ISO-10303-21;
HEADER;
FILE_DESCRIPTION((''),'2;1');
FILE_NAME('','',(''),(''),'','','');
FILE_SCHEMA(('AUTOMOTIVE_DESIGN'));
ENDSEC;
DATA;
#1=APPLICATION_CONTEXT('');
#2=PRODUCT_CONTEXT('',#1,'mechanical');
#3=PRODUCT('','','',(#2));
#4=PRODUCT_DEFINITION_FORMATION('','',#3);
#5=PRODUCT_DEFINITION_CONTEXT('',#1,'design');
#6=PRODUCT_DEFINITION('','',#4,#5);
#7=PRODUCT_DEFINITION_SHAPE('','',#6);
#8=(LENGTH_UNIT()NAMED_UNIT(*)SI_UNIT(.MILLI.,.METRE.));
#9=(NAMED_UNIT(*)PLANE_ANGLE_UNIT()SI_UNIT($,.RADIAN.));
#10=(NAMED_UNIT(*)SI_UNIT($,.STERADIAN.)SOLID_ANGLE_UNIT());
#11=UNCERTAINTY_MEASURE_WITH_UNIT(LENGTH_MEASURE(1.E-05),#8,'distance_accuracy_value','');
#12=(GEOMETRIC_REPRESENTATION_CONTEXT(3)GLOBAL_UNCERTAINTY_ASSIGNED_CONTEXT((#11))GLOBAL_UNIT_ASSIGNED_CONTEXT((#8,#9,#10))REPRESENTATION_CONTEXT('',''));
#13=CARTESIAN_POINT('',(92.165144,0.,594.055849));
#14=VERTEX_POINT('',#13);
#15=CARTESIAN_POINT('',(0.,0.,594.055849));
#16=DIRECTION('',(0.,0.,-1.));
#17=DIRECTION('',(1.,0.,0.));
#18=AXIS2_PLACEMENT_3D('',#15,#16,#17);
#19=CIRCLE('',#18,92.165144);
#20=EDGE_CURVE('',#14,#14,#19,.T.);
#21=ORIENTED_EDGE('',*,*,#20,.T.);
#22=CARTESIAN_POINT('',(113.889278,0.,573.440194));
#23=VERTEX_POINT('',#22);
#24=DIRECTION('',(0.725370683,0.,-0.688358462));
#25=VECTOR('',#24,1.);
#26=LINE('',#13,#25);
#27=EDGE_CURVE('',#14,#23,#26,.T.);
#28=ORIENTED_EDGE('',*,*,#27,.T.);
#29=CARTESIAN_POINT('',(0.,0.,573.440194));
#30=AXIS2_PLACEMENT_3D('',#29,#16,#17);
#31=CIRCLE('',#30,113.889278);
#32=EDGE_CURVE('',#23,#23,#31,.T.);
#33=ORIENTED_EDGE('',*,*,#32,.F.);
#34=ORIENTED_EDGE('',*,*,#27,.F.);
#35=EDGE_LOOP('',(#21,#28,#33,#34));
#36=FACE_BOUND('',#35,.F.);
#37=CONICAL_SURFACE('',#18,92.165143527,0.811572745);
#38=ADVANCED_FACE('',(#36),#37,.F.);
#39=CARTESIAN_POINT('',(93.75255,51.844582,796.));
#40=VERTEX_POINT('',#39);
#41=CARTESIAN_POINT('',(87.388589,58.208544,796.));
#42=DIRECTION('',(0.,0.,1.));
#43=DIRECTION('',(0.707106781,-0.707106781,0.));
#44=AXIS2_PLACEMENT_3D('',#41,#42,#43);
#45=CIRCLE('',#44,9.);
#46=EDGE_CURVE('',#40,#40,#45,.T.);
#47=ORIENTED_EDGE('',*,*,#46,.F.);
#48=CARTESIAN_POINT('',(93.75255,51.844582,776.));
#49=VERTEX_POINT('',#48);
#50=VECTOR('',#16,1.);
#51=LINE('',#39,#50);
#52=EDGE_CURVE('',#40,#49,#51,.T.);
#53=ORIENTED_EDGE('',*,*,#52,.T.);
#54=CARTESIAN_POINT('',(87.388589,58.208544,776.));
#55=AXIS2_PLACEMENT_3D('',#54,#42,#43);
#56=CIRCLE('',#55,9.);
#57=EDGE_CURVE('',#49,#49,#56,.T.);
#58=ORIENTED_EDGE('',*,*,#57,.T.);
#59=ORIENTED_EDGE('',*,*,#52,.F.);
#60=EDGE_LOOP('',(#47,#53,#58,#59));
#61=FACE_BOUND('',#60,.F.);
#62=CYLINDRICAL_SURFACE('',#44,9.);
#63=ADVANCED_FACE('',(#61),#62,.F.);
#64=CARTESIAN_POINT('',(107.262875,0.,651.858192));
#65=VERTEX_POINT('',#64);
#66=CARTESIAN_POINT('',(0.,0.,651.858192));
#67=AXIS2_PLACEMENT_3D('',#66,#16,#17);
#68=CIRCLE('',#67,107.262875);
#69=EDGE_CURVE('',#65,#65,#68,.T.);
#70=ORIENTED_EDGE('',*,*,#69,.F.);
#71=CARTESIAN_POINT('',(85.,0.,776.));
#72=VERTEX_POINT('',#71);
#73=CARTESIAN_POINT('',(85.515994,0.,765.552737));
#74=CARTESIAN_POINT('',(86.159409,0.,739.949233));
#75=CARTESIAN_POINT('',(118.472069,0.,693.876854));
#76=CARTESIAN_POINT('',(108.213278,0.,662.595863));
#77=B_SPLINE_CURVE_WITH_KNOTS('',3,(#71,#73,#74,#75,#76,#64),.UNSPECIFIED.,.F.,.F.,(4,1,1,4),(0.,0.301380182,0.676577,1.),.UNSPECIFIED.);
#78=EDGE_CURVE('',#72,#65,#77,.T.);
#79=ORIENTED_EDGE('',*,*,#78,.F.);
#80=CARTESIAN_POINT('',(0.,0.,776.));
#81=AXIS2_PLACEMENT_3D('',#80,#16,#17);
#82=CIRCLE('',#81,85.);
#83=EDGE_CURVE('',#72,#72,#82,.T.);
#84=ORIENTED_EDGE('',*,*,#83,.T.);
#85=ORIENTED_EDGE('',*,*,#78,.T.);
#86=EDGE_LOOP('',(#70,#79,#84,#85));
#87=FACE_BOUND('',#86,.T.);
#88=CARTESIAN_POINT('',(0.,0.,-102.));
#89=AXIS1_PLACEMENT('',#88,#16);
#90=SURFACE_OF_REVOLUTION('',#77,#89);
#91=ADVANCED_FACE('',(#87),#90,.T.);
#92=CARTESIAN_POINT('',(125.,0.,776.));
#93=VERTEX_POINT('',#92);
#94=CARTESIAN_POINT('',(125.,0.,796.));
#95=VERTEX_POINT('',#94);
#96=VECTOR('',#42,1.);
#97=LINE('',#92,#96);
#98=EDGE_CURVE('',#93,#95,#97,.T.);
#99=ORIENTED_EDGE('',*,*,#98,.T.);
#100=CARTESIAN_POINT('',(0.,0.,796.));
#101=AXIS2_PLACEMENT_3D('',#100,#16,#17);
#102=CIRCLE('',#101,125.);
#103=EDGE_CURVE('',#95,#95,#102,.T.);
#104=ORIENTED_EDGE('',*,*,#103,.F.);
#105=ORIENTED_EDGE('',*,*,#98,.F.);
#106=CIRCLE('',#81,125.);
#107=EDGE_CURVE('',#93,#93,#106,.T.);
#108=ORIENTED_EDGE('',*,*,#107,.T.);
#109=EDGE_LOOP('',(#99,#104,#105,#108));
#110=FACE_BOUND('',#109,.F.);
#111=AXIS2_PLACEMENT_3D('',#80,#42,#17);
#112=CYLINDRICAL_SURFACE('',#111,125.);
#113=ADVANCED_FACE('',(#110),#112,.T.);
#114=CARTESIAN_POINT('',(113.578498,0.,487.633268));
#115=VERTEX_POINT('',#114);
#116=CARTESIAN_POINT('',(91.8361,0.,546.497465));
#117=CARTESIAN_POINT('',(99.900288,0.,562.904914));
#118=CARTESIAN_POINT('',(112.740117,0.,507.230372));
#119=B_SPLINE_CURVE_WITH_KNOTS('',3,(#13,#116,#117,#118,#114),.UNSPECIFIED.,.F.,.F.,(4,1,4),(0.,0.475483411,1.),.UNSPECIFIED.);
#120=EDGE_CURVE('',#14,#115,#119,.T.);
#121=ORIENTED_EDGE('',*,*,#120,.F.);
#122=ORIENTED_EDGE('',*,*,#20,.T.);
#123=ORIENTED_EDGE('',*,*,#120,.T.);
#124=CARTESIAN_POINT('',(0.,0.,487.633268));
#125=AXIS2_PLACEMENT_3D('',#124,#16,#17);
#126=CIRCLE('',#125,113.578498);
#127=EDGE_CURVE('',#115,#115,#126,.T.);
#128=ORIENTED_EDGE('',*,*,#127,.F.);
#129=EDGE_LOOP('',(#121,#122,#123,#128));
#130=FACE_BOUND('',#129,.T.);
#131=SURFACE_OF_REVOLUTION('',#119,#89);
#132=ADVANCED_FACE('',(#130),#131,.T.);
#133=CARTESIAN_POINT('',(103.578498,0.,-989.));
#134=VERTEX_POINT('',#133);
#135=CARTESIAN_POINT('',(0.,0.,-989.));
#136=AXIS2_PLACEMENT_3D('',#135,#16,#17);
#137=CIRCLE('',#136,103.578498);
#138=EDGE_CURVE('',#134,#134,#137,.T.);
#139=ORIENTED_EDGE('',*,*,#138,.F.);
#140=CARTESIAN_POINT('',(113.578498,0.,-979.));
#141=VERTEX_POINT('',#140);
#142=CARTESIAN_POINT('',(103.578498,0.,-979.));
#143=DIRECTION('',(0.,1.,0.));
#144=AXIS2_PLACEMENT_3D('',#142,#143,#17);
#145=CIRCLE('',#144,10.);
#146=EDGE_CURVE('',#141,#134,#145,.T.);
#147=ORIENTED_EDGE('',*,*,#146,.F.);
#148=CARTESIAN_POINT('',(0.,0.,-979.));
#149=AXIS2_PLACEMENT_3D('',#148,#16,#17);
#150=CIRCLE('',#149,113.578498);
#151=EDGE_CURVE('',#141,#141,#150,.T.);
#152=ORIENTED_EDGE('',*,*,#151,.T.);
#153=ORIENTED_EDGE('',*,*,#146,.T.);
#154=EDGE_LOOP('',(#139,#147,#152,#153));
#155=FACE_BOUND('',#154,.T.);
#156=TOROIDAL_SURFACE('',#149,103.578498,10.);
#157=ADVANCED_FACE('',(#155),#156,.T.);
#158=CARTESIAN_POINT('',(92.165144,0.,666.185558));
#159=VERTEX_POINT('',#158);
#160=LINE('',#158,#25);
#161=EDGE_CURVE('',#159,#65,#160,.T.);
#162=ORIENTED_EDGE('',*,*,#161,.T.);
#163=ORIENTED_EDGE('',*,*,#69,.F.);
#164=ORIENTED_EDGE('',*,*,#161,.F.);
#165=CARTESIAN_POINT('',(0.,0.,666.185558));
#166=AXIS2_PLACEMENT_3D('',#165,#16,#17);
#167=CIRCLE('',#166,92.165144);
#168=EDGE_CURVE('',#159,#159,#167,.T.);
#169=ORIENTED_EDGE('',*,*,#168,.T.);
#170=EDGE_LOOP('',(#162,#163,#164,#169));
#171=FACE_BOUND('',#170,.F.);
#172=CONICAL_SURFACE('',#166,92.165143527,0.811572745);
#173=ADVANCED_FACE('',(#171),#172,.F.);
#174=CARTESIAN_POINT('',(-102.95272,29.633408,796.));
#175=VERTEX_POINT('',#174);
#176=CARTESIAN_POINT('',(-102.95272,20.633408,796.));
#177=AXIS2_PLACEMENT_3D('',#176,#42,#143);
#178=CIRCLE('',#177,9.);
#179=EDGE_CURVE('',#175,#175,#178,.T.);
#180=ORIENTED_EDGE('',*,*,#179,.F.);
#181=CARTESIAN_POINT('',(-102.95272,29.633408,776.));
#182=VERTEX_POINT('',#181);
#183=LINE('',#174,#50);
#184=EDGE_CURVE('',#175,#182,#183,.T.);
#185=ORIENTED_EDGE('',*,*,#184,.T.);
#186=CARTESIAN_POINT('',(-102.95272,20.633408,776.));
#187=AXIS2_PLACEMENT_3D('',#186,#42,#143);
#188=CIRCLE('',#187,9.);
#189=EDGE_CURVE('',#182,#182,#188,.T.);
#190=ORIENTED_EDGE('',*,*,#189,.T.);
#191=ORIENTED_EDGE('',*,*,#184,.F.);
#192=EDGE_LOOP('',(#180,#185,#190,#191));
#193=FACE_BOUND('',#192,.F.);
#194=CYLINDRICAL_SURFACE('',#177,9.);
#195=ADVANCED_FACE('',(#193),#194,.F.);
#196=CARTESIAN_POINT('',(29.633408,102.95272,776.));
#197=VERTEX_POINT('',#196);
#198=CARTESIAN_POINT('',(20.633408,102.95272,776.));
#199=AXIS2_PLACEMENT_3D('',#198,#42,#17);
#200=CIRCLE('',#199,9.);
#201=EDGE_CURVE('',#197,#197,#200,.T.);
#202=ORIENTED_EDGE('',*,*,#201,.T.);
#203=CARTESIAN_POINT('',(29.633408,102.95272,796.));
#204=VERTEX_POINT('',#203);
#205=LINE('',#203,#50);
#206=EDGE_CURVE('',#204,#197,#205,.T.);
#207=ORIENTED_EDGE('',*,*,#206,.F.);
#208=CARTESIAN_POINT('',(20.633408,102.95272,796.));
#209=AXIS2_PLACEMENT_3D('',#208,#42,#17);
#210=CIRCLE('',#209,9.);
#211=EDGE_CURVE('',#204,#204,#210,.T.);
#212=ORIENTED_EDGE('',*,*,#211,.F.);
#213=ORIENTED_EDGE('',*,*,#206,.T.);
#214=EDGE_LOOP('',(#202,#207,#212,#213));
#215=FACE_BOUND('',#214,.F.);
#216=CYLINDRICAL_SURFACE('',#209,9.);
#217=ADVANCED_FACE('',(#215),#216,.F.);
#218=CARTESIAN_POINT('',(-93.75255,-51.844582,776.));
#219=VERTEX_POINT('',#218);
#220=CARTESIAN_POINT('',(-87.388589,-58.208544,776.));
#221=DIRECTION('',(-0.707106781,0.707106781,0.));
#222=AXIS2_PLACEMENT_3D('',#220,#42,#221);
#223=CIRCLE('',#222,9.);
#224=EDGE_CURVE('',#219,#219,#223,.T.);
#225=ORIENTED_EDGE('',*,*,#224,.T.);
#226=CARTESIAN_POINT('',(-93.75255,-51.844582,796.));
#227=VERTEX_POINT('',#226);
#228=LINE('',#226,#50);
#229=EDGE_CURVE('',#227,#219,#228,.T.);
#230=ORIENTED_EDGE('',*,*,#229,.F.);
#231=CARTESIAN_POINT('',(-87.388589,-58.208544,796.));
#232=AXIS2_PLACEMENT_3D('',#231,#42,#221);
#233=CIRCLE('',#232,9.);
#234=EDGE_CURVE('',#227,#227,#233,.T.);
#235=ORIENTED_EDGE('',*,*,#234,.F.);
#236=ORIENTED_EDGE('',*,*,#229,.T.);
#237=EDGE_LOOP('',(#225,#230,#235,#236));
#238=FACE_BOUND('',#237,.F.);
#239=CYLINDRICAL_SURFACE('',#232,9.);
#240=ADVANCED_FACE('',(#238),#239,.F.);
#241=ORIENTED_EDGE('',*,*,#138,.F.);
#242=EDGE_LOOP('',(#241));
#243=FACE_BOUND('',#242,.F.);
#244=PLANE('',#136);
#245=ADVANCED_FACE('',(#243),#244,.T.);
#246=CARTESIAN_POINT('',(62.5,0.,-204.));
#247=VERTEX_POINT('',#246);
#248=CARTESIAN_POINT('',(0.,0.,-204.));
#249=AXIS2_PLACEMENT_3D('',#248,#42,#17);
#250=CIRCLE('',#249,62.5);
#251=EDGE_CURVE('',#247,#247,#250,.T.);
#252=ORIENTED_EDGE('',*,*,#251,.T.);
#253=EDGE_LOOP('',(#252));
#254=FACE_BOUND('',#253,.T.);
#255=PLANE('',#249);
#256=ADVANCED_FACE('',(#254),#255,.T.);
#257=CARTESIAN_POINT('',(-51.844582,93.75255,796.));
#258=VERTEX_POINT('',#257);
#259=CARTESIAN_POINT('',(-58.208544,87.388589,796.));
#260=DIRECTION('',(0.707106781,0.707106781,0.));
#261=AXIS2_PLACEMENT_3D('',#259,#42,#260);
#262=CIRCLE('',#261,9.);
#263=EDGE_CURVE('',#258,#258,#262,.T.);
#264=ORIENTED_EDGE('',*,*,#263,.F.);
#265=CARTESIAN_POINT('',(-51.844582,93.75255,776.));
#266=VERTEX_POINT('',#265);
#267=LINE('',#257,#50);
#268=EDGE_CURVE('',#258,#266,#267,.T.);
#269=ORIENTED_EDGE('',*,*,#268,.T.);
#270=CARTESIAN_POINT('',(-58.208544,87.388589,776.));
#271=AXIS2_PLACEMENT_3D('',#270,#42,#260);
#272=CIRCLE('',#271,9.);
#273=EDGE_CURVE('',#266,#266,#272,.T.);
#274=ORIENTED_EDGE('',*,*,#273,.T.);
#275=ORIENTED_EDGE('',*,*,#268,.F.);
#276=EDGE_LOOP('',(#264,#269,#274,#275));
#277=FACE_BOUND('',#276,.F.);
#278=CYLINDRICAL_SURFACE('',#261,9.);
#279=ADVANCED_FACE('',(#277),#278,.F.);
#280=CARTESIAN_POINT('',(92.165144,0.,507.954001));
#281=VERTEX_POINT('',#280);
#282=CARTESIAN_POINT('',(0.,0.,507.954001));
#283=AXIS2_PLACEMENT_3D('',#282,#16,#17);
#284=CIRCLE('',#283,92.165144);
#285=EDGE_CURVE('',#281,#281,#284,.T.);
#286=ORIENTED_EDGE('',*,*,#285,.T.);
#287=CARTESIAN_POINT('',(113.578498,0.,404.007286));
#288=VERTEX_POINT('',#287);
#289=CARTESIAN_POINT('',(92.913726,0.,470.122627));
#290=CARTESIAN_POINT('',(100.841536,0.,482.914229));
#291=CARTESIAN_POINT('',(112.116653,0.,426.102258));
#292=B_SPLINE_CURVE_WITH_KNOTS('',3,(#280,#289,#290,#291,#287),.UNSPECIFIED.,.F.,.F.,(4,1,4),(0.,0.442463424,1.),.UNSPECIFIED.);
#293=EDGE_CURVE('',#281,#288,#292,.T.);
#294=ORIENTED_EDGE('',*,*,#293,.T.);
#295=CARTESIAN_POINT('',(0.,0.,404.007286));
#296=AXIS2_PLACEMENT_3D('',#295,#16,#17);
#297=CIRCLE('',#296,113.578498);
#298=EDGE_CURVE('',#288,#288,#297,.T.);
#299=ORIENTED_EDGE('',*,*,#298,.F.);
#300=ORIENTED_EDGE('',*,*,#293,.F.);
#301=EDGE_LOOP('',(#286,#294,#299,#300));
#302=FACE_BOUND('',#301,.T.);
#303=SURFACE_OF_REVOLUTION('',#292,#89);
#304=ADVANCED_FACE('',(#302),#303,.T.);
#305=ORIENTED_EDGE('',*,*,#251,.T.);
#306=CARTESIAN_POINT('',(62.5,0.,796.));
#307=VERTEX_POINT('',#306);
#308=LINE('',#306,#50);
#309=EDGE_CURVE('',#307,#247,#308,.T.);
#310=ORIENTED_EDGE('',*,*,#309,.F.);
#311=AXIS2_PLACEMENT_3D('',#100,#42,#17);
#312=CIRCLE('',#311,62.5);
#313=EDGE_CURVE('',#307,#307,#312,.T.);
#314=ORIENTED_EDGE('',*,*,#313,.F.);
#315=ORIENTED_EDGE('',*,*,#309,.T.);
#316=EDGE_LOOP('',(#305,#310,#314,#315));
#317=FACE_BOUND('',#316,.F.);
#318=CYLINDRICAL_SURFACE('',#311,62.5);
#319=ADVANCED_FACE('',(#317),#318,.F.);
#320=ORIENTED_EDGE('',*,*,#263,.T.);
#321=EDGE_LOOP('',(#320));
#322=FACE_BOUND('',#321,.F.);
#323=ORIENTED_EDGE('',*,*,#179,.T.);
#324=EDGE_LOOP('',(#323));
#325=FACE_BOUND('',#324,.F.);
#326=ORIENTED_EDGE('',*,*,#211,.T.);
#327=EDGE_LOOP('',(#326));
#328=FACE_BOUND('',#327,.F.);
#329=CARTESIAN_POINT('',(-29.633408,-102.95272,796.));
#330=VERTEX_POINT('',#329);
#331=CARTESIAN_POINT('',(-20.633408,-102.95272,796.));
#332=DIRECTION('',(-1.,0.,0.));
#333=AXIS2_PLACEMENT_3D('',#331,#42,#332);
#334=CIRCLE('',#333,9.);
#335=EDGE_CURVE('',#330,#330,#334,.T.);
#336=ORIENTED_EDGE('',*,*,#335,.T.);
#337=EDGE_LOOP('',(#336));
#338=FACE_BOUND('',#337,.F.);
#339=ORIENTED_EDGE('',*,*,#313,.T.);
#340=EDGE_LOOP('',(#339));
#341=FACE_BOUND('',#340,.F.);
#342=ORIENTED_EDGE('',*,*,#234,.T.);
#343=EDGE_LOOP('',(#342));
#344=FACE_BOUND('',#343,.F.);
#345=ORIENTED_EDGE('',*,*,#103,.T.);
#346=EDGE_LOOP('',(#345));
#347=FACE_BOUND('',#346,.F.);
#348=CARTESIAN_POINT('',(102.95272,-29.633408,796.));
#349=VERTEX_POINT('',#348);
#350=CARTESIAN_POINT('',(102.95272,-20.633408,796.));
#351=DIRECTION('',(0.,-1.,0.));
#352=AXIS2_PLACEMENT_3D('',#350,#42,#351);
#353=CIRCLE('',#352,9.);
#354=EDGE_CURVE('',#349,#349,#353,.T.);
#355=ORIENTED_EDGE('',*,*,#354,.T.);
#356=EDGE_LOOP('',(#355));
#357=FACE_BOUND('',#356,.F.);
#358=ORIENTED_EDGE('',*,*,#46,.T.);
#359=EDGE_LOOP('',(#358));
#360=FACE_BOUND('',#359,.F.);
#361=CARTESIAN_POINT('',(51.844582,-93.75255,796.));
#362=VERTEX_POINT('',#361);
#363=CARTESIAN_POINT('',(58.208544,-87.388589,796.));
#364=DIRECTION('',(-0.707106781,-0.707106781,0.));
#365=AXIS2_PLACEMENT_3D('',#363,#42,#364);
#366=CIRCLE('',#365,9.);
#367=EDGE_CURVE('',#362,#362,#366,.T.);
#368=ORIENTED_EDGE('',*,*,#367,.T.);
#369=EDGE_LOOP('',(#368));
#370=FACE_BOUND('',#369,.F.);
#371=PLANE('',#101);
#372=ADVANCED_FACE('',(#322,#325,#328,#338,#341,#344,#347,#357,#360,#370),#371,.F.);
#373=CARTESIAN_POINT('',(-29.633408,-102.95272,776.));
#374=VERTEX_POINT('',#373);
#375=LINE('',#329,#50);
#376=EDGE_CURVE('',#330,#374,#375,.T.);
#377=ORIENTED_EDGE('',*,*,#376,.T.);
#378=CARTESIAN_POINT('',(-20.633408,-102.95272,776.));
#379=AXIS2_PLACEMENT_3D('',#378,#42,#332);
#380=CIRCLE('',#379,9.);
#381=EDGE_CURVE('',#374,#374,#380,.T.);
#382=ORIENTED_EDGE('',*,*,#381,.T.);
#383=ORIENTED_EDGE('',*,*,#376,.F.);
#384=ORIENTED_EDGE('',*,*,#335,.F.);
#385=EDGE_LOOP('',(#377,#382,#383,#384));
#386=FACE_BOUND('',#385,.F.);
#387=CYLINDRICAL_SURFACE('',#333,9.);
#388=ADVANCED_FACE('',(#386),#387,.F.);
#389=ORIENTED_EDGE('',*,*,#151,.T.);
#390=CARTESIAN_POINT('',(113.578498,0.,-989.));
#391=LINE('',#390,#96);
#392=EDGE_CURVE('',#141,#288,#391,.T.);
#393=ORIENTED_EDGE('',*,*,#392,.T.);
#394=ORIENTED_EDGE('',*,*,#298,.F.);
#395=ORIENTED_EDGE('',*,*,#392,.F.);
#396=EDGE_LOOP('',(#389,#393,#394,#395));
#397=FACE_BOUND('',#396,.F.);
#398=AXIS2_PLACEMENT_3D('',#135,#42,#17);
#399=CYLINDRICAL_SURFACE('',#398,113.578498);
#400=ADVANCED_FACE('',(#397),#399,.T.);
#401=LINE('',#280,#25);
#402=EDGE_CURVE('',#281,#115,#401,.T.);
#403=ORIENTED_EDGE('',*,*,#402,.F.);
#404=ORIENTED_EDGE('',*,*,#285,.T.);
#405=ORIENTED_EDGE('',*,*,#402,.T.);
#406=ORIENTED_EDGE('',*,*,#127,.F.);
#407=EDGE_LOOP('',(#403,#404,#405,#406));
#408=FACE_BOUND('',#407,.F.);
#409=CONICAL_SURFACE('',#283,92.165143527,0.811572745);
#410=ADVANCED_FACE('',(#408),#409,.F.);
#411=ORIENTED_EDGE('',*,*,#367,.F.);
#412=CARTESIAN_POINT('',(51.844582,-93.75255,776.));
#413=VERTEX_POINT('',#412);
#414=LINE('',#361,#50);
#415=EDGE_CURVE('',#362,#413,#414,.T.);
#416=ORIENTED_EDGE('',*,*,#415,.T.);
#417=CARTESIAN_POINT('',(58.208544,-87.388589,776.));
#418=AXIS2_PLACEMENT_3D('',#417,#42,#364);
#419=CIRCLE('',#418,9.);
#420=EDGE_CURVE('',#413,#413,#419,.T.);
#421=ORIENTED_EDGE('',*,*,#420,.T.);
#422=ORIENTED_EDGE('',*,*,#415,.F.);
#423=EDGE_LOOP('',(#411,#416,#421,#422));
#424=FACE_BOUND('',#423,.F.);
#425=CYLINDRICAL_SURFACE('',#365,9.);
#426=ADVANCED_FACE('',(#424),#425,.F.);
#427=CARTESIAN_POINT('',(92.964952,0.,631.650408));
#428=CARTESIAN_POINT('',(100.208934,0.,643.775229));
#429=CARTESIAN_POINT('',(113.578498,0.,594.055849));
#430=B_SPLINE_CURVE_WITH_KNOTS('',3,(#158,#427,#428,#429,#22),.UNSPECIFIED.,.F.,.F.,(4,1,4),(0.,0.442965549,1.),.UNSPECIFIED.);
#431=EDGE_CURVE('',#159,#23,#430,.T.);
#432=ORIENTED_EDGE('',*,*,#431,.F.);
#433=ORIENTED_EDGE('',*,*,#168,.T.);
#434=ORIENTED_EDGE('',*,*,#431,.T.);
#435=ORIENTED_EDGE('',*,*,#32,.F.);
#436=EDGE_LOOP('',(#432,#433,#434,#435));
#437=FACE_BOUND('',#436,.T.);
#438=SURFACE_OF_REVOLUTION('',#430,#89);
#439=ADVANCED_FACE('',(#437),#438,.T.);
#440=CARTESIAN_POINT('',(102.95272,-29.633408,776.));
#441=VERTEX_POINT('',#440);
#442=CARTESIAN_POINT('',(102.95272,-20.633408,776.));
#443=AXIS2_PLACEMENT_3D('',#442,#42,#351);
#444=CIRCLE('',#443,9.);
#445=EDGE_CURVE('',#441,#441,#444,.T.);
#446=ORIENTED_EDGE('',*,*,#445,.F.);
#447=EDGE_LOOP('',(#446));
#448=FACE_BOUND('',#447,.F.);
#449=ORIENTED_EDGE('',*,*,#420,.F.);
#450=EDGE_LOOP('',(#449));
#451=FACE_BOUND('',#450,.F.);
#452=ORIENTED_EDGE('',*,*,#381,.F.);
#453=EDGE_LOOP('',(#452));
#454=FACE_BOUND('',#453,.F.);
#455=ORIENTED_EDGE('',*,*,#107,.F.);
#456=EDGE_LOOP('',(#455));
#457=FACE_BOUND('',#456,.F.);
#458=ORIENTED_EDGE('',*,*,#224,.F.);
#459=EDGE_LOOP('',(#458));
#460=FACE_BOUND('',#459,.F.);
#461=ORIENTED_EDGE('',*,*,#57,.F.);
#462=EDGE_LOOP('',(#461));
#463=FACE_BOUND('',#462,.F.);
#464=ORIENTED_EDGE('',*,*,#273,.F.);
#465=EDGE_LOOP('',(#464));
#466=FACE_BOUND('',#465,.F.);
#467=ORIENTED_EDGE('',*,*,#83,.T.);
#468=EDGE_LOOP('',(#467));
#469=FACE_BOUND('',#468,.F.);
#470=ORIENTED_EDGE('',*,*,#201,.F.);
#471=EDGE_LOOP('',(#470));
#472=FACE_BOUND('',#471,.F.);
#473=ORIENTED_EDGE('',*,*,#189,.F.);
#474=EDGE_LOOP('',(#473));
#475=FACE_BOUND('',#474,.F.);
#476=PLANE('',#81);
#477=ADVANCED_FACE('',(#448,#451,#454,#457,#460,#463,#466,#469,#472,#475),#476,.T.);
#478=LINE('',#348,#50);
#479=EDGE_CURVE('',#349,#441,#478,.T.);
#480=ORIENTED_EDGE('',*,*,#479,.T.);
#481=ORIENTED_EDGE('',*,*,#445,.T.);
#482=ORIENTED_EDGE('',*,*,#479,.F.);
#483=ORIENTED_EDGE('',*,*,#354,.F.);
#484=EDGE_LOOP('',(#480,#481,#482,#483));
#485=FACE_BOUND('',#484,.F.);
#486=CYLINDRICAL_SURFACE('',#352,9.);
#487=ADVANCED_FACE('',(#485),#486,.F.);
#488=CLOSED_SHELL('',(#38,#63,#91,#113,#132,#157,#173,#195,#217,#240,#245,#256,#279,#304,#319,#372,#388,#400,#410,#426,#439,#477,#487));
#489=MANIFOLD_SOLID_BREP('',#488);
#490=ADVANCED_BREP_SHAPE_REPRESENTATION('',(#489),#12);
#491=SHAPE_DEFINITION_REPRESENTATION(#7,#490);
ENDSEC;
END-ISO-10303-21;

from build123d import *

# Parameters (mm, degrees)
F2_R            = 9
F3_DEPTH        = 20
F3_COPIES_COUNT = 8
F4_R            = 62.5
F5_DEPTH        = 1000
F6_R            = 10


# Not quite as in the source:
# - a pattern or mirror of a feature is missing from the dataset's text; its kind, count and spacing are read off the source's solid
# - a feature names something its author has since deleted; it is built from what else it names


with BuildPart() as f1:
    # F0 (on Front) → F1 (revolve)
    with BuildSketch(Plane.XZ):
        with BuildLine():
            Line((125, 796), (0, 796))
            Line((0, 796), (0, -989))
            Line((0, -989), (113.5784983635, -989))
            Line((113.5784983635, -989), (113.5784983635, 404.0072858334))
            add(Edge.make_bspline(
                [(92.1651435272, 507.9540014267), (92.9137259621, 470.1226269606), (100.84153647, 482.9142285433), (112.1166527424, 426.1022583198), (113.5784983635, 404.0072858334)],
                knots=[0, 0, 0, 0, 0.4424634244, 1, 1, 1, 1], degree=3))
            Line((92.1651435272, 507.9540014267), (113.5784983635, 487.6332684117))
            add(Edge.make_bspline(
                [(92.1651435272, 594.0558493723), (91.8360996428, 546.4974648718), (99.9002877175, 562.9049137477), (112.740117412, 507.2303715025), (113.5784983635, 487.6332684117)],
                knots=[0, 0, 0, 0, 0.4754834111, 1, 1, 1, 1], degree=3))
            Line((92.1651435272, 594.0558493723), (113.8892782108, 573.4401941299))
            add(Edge.make_bspline(
                [(92.1651435272, 666.1855578423), (92.9649518715, 631.6504081509), (100.208934103, 643.7752292593), (113.5784983635, 594.0558493723), (113.8892782108, 573.4401941299)],
                knots=[0, 0, 0, 0, 0.4429655486, 1, 1, 1, 1], degree=3))
            Line((92.1651435272, 666.1855578423), (107.2628746321, 651.8581922678))
            add(Edge.make_bspline(
                [(85, 776), (85.5159944694, 765.5527371234), (86.1594088799, 739.9492330129), (118.4720692878, 693.8768537198), (108.213278463, 662.5958632515), (107.2628746321, 651.8581922678)],
                knots=[0, 0, 0, 0, 0.3013801818, 0.6765769995, 1, 1, 1, 1], degree=3))
            Line((85, 776), (125, 776))
            Line((125, 776), (125, 796))
        make_face()
    revolve(axis=Axis((0, 0, -102), (0, 0, -1)))

    # F2 (on face) → F3 (cut, through all)
    with BuildSketch(Plane.XY.offset(796)):
        with Locations((20.6334079429, 102.9527196176)):
            Circle(F2_R)
    f3 = extrude(amount=-F3_DEPTH, mode=Mode.SUBTRACT)

    # F3_copies: F3 ×8 about axis
    f3_copies_axis = Axis((0, 0, 0), (0, 0, 1))
    for i in range(1, F3_COPIES_COUNT):
        add(f3.rotate(f3_copies_axis, i * 360 / F3_COPIES_COUNT), mode=Mode.SUBTRACT)

    # F4 (on face) → F5 (cut)
    with BuildSketch(Plane.XY.offset(796)):
        Circle(F4_R)
    extrude(amount=-F5_DEPTH, mode=Mode.SUBTRACT)

    # F6
    f6_edges = [f1.edges().sort_by_distance(p)[0] for p in [
        (-113.578498, 0, -989),
    ]]
    fillet(f6_edges, radius=F6_R)


solid = f1.part
